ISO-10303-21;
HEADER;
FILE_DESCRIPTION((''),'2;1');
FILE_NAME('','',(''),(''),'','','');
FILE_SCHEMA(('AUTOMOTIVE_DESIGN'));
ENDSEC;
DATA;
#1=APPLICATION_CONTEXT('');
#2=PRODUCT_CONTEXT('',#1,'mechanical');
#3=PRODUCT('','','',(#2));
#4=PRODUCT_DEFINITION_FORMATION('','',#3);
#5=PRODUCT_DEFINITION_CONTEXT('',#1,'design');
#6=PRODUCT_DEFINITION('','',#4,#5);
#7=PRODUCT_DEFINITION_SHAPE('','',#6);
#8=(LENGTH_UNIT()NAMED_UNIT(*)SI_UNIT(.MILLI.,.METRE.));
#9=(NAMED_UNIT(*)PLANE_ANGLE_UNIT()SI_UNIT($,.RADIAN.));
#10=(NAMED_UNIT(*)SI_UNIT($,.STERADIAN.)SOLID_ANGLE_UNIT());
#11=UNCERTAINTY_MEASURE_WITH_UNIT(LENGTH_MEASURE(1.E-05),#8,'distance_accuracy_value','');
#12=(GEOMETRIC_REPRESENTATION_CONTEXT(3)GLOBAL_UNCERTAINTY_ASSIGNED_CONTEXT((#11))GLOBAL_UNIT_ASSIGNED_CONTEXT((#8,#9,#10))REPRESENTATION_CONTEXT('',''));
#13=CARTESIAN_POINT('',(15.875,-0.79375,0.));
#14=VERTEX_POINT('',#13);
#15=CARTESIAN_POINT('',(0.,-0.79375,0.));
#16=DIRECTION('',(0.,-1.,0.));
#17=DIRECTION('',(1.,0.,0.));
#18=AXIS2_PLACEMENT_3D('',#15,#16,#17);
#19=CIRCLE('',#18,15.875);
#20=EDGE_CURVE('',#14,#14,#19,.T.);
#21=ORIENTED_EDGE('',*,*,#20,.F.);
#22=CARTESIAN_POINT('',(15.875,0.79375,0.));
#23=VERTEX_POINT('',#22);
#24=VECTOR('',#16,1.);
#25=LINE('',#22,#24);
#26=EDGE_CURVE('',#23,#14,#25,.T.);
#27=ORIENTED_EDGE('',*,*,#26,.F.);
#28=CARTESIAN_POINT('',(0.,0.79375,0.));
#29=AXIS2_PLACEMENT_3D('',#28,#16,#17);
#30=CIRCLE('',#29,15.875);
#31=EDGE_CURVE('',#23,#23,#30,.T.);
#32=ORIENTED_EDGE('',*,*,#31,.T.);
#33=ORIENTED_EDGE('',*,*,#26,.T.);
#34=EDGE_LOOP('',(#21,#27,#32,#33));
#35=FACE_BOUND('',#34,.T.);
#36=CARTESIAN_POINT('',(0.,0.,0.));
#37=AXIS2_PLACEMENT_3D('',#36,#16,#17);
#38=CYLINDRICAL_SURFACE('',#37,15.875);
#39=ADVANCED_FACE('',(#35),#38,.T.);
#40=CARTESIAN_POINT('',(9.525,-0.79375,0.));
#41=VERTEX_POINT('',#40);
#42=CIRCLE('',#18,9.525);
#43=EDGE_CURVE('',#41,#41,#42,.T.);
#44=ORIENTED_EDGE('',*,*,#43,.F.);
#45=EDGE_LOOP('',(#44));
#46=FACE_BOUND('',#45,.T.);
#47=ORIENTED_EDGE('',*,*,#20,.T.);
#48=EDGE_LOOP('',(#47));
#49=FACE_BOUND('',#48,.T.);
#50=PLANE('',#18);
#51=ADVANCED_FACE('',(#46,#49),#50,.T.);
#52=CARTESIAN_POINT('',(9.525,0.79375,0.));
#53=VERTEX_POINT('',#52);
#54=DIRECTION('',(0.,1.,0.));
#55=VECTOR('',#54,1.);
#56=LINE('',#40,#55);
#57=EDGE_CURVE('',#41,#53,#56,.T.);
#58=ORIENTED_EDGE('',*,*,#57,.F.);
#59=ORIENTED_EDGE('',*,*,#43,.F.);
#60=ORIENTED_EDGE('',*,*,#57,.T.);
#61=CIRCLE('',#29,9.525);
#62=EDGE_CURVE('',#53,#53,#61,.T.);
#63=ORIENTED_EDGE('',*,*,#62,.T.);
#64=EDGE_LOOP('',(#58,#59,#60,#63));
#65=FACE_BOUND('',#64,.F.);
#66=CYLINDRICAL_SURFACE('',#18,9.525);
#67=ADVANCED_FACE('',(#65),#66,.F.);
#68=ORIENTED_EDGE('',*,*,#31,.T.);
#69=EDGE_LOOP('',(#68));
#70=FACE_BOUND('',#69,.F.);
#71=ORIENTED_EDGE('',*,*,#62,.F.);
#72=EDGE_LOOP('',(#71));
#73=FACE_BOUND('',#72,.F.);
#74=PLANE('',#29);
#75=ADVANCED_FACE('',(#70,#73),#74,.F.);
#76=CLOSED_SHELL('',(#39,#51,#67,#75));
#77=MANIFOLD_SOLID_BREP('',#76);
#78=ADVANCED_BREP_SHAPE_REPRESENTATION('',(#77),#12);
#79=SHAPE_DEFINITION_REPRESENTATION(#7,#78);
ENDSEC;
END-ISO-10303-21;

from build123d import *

# Parameters (mm, degrees)
F0_R     = 15.875
F1_DEPTH = 0.79375
F2_R     = 9.525
F3_DEPTH = 1.5885


# Not quite as in the source:
# - the program builds the solid bodies; features that only make, move or delete a surface that nothing else refers to are left out


with BuildPart() as f1:
    # F0 (on Front) → F1 (new body, symmetric)
    with BuildSketch(Plane.XZ):
        Circle(F0_R)
    extrude(amount=F1_DEPTH, both=True)

    # F2 (on face) → F3 (cut, through all)
    with BuildSketch(Plane.XZ.offset(0.79375)):
        Circle(F2_R)
    extrude(amount=-F3_DEPTH, mode=Mode.SUBTRACT)


solid = f1.part
